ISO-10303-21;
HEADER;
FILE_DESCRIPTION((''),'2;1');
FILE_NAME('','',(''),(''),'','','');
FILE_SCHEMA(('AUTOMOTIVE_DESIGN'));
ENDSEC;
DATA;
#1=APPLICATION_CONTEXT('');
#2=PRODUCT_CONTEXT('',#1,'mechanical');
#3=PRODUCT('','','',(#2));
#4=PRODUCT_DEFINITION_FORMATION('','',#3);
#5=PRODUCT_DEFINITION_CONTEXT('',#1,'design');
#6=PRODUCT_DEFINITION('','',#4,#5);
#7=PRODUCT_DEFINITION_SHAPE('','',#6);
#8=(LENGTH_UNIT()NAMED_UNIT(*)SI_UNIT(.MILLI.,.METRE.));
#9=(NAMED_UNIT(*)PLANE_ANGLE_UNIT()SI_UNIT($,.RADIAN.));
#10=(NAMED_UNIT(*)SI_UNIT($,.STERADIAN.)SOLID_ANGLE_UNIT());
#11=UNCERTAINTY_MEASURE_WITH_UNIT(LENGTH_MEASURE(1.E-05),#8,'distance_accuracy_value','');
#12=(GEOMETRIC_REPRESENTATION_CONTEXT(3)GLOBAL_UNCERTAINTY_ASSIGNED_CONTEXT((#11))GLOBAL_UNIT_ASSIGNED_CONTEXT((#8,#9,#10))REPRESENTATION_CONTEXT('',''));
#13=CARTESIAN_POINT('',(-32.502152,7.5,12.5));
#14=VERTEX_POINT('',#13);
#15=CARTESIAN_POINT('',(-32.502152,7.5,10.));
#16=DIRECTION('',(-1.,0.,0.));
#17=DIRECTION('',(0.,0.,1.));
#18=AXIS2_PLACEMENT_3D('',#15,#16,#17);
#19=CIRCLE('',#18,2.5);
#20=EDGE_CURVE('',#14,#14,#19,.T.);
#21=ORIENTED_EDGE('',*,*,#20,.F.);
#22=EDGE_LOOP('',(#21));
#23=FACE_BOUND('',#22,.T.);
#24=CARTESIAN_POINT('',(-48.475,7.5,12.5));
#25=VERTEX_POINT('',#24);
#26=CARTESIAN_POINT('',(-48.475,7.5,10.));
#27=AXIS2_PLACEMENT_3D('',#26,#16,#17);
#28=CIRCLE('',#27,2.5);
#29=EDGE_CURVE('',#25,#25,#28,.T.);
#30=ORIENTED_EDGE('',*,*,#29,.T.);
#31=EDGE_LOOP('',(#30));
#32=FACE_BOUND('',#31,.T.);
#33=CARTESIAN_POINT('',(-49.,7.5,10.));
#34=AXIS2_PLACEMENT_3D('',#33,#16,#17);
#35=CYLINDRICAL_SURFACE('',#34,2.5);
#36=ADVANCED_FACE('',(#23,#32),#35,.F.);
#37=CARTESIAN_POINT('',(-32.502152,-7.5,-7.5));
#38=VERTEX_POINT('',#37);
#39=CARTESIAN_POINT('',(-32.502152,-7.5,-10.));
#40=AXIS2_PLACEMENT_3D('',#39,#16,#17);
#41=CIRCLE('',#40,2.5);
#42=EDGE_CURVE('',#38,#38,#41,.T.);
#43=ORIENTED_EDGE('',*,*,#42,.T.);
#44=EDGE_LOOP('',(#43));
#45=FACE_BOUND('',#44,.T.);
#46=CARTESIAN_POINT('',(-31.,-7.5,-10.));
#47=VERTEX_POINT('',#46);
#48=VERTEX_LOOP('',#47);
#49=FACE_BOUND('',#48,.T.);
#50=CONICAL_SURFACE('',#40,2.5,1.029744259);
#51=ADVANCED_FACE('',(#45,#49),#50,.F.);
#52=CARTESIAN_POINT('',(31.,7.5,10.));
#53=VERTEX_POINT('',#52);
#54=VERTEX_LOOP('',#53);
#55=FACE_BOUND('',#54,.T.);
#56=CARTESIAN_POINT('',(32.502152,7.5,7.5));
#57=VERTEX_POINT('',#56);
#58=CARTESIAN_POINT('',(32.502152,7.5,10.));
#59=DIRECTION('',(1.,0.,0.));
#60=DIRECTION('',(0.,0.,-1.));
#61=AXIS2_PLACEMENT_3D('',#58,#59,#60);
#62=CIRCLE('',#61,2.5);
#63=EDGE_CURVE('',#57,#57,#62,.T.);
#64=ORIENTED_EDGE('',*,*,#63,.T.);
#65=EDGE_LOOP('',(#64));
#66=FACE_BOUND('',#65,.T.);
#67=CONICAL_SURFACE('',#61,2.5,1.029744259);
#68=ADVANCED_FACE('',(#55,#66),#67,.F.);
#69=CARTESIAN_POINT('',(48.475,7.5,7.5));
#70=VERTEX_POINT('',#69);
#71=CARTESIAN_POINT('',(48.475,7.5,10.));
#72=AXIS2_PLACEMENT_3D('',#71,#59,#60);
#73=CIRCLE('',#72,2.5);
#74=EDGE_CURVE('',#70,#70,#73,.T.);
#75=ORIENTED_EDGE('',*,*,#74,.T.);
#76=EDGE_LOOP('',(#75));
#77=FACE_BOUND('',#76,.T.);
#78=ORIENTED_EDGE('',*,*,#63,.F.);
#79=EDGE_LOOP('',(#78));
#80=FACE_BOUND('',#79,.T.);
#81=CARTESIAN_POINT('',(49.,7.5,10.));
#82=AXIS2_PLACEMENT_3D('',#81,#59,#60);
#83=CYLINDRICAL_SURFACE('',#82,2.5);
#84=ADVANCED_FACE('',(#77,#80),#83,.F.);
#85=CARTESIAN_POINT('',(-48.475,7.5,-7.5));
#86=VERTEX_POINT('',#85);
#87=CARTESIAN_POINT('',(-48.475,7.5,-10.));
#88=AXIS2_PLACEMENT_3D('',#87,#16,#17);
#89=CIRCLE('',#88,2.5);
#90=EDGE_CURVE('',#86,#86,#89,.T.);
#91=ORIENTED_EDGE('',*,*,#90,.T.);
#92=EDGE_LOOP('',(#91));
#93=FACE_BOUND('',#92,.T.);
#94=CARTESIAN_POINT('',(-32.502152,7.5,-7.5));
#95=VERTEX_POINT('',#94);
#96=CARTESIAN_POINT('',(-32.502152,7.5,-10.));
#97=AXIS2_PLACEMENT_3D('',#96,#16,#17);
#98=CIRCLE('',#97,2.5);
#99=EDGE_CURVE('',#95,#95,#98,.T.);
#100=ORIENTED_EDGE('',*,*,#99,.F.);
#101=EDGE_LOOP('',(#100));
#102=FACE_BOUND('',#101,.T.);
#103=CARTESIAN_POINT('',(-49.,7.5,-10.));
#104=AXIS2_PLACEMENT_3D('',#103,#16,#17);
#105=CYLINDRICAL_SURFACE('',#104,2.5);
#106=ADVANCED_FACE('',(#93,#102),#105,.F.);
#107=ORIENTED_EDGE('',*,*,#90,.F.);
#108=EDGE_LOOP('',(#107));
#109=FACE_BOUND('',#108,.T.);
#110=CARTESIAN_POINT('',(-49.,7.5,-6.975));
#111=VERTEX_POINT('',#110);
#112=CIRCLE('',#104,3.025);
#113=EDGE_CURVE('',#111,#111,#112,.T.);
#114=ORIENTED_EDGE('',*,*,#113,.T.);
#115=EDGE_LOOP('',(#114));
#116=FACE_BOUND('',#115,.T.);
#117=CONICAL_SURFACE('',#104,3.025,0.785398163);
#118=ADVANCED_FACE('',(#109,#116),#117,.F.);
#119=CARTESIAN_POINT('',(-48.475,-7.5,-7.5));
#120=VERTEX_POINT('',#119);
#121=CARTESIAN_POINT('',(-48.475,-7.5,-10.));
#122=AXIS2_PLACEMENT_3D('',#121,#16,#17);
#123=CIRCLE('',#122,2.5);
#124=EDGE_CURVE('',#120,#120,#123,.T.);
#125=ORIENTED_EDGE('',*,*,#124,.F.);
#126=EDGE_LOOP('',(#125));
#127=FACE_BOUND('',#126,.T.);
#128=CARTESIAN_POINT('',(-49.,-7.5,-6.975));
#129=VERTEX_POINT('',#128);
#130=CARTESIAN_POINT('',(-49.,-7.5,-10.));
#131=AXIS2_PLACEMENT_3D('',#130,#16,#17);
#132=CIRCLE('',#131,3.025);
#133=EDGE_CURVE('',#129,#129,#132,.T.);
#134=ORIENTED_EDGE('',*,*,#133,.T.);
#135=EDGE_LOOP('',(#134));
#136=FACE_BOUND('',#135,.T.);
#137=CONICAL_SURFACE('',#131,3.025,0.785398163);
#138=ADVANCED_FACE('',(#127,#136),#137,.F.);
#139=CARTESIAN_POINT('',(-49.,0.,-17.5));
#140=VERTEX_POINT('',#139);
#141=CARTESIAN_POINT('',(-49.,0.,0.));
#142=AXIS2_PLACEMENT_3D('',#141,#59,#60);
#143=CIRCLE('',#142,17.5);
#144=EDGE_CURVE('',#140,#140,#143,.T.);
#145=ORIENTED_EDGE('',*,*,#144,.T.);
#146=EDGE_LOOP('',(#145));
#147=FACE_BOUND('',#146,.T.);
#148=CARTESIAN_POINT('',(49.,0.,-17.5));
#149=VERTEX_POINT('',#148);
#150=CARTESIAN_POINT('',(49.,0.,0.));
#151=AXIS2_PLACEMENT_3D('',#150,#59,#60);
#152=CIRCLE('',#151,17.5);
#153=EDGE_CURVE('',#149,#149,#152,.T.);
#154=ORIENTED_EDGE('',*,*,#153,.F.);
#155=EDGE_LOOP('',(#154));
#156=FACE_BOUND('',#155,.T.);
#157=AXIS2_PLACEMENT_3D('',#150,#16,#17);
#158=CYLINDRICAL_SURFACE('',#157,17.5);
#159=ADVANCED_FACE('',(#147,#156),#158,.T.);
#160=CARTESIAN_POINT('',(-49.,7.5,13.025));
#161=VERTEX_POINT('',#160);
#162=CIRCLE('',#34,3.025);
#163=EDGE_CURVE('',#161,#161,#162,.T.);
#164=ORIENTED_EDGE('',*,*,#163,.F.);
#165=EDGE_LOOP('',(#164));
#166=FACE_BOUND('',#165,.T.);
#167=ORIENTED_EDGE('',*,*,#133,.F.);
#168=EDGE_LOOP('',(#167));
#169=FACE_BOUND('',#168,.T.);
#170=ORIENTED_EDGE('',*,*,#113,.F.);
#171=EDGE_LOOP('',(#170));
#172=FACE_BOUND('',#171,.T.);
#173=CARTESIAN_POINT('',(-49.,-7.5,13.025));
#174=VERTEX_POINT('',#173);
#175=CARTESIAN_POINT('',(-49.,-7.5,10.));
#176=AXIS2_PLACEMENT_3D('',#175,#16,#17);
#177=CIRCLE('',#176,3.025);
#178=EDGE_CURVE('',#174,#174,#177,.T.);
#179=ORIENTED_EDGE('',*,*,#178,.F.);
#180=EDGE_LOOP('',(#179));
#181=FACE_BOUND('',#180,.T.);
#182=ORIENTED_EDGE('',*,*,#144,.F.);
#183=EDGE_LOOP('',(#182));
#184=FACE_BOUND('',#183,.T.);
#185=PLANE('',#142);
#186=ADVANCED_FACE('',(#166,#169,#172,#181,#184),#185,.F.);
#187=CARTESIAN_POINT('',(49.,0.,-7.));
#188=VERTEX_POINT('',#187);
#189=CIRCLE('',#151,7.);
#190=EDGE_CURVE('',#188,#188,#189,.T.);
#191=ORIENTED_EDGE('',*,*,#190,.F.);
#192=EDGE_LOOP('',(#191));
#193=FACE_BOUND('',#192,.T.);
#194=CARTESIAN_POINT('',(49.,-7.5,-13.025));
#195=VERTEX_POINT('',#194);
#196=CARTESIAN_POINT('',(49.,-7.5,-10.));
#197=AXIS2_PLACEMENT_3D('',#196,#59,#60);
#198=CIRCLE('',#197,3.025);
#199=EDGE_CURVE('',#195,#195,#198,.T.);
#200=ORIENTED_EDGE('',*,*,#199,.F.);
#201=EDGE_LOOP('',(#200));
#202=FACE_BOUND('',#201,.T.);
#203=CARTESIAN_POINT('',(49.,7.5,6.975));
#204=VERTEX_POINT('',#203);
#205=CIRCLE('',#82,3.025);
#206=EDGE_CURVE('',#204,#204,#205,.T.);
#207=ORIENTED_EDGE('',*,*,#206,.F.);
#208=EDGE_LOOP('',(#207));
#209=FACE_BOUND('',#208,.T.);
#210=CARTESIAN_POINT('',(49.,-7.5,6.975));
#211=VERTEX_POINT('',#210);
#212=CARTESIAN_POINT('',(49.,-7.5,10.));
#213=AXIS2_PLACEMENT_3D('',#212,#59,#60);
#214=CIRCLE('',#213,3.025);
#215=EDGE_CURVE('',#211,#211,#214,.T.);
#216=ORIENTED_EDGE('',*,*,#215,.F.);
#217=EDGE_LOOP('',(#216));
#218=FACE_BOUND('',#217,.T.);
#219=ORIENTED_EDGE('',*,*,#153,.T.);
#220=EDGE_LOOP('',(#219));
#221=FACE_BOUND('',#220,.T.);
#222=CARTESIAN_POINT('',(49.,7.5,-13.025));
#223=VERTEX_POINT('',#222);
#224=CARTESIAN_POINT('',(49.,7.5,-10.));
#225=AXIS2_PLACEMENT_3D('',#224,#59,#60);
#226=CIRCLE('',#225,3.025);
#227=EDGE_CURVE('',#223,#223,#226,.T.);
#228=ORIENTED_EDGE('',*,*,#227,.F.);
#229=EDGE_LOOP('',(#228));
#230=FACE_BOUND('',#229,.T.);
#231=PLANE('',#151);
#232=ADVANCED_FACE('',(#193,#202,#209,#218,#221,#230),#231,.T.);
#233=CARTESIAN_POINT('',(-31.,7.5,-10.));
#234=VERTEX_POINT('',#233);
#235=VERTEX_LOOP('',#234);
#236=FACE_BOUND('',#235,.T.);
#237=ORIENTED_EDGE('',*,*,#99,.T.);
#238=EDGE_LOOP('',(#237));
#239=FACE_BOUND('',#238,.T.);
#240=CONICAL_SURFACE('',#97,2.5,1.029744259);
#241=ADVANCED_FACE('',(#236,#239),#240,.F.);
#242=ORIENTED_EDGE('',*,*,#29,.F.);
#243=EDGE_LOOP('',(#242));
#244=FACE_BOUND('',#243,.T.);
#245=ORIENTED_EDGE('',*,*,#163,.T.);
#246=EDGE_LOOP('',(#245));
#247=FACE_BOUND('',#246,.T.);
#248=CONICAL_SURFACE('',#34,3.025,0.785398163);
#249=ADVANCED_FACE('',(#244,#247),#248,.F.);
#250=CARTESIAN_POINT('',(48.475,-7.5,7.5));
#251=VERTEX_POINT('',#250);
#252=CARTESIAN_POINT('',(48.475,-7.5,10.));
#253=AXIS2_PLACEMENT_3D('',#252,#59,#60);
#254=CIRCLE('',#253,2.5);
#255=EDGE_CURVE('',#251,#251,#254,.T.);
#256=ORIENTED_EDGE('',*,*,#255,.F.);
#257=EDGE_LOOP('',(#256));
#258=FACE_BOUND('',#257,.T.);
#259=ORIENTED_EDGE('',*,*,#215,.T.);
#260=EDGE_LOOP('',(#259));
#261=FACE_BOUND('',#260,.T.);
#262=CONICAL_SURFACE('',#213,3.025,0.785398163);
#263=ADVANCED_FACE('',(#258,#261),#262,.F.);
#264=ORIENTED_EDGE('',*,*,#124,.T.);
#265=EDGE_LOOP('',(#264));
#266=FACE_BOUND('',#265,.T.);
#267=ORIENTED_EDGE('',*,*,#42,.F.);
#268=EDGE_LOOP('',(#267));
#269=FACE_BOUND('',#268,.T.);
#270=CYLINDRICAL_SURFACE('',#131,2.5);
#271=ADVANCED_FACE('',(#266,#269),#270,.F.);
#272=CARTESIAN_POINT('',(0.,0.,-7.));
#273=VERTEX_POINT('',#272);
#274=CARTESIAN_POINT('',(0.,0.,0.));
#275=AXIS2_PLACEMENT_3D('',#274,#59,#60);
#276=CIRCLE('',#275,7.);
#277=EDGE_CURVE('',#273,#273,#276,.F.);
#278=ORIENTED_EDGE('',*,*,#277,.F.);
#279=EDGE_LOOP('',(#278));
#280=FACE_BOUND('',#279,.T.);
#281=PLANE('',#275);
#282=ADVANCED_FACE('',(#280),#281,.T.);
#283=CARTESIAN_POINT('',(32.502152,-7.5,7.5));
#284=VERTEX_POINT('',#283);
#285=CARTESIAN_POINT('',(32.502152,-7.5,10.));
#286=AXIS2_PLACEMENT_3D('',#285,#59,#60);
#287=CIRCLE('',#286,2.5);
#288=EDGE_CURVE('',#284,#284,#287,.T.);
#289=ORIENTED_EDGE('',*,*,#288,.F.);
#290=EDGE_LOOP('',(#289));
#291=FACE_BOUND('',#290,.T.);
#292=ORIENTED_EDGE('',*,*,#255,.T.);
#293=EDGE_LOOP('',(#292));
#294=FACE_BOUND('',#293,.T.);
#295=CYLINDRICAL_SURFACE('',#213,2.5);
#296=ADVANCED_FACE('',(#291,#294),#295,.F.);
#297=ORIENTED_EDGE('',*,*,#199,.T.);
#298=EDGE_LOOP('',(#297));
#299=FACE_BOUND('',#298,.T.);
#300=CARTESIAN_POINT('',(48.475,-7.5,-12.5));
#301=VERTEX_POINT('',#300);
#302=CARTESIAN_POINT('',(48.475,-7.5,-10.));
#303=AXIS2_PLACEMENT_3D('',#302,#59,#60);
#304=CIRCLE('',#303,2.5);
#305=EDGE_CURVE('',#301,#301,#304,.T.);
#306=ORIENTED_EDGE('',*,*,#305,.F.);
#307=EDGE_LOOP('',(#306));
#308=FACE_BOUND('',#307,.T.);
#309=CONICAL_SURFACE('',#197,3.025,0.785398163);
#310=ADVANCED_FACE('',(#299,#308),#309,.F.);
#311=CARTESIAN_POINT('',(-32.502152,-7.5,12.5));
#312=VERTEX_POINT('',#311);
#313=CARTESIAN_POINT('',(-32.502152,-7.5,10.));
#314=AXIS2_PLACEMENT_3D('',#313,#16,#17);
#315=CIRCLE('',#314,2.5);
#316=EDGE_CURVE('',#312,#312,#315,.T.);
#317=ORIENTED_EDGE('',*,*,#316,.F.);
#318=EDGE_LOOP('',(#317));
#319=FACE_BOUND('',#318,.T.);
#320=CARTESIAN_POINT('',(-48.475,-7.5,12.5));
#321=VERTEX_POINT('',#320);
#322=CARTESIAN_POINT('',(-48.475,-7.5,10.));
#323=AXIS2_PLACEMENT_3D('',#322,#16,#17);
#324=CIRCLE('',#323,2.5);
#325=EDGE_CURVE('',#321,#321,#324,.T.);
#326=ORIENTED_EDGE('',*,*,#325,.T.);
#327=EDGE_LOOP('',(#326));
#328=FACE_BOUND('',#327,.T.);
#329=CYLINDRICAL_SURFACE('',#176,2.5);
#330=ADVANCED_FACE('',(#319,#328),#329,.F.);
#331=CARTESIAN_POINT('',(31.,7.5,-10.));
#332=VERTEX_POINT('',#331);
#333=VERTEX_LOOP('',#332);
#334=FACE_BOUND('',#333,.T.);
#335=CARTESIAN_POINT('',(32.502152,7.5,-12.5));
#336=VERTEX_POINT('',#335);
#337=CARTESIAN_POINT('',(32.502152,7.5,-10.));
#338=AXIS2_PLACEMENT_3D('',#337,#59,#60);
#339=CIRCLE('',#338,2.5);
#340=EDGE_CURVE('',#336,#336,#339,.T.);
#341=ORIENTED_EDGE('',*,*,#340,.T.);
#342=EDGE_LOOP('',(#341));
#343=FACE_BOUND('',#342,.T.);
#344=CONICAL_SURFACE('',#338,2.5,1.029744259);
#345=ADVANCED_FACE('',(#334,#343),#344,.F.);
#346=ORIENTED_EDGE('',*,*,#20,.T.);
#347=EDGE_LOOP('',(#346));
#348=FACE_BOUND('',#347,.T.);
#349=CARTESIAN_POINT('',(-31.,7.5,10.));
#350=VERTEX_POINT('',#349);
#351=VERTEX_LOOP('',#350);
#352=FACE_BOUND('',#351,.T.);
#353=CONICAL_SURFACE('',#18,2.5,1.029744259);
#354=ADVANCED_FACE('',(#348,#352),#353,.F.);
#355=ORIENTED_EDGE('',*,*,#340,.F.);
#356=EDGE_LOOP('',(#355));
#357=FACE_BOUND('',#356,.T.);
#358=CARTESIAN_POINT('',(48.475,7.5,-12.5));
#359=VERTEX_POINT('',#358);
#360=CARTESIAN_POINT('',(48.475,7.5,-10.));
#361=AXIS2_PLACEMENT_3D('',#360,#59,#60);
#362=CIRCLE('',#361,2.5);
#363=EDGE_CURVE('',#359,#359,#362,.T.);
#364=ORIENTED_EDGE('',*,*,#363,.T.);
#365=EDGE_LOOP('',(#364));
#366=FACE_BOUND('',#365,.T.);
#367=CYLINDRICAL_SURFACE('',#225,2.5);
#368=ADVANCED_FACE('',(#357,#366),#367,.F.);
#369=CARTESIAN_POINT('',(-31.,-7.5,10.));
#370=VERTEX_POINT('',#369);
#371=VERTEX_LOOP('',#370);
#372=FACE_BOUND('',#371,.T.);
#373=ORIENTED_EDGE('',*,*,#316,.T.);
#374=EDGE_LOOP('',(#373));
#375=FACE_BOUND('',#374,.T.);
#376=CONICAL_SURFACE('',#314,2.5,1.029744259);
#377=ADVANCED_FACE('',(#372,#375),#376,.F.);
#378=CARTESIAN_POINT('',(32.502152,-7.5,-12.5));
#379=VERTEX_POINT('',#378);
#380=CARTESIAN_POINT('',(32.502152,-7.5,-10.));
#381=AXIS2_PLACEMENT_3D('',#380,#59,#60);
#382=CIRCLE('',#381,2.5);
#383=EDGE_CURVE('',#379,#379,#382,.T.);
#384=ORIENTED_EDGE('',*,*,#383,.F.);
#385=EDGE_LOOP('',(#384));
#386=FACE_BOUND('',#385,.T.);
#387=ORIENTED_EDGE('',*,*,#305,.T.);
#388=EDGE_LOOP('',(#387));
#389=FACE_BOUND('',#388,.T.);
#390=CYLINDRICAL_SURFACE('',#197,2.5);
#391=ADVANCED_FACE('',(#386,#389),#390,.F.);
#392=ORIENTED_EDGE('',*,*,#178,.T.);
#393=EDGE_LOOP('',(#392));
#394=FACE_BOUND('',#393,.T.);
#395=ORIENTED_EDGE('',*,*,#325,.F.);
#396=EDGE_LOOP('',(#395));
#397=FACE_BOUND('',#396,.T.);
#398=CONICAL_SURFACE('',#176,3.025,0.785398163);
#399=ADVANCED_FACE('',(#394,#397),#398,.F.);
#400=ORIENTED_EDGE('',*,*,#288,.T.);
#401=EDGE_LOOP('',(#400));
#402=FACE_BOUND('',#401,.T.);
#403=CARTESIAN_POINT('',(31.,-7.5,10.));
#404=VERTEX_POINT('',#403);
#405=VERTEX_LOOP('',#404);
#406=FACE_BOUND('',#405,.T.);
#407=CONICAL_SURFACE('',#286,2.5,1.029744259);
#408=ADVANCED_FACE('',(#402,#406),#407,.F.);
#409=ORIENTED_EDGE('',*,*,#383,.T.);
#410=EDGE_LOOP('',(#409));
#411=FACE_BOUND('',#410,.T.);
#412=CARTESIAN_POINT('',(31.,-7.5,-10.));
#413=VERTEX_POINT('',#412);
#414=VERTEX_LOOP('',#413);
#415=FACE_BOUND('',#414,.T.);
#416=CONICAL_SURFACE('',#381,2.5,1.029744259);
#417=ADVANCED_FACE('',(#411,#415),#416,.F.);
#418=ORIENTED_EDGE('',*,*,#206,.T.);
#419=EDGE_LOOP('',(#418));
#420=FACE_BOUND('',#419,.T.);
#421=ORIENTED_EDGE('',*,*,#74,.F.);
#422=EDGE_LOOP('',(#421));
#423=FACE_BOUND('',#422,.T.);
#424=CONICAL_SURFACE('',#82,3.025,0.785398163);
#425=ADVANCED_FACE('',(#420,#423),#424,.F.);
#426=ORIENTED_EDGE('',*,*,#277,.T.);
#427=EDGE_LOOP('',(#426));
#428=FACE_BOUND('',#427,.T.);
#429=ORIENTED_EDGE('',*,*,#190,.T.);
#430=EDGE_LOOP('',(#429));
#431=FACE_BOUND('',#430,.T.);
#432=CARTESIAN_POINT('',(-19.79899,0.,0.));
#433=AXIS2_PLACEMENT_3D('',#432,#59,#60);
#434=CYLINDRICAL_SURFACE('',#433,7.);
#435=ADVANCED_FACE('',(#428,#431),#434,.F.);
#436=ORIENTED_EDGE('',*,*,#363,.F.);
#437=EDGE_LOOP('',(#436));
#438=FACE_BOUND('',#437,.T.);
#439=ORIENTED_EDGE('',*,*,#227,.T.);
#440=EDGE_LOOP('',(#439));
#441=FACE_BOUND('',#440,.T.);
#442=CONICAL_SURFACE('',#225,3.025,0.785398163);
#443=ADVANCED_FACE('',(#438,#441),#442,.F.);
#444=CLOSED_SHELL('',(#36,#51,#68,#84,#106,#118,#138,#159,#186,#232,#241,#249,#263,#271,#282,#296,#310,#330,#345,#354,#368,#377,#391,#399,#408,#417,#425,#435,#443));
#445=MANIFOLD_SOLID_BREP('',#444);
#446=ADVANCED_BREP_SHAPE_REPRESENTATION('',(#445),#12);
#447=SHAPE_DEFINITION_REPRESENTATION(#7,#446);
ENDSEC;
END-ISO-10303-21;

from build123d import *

# Parameters (mm, degrees)
SKETCH2_R           = 17.5
BOSS_EXTRUDE1_DEPTH = 49
CUT_EXTRUDE1_START  = -49
SKETCH3_R           = 7
CUT_EXTRUDE1_DEPTH  = 49


# Read off the part's stored shape, not the designer's step: M6 Tapped Hole1
with BuildPart() as part:
    # Sketch2 → Boss-Extrude1 (new, symmetric)
    with BuildSketch(Plane(origin=(0, 0, 0), x_dir=(0, 0, -1), z_dir=(1, 0, 0))):
        Circle(SKETCH2_R)
    extrude(amount=BOSS_EXTRUDE1_DEPTH, both=True)

    # Sketch3 → Cut-Extrude1 (cut)
    with BuildSketch(Plane(origin=(49, 0, 0), x_dir=(0, 0, -1), z_dir=(1, 0, 0)).offset(CUT_EXTRUDE1_START)):
        Circle(SKETCH3_R)
    extrude(amount=CUT_EXTRUDE1_DEPTH, mode=Mode.SUBTRACT)

    # M6 Tapped Hole1 outline → M6 Tapped Hole1 (revolve, cut)
    with BuildSketch(Plane(origin=(0, -7.5, -10), x_dir=(0, 1, 0), z_dir=(0, 0, -1))):
        Polygon((0, 49), (0, 31), (2.5, 32.502151548), (2.5, 48.475), (3.025, 49), align=None)
    m6_tapped_hole1 = revolve(axis=Axis((0, -7.5, -10), (1, 0, 0)), mode=Mode.SUBTRACT)

    # M6 Tapped Hole1 2 outline → M6 Tapped Hole1 2 (revolve, cut)
    with BuildSketch(Plane(origin=(0, 7.5, 10), x_dir=(0, 1, 0), z_dir=(0, 0, -1))):
        Polygon((0, 49), (0, 31), (2.5, 32.502151548), (2.5, 48.475), (3.025, 49), align=None)
    m6_tapped_hole1_2 = revolve(axis=Axis((0, 7.5, 10), (1, 0, 0)), mode=Mode.SUBTRACT)

    # M6 Tapped Hole1 3 outline → M6 Tapped Hole1 3 (revolve, cut)
    with BuildSketch(Plane(origin=(0, -7.5, 10), x_dir=(0, 1, 0), z_dir=(0, 0, -1))):
        Polygon((0, 49), (0, 31), (2.5, 32.502151548), (2.5, 48.475), (3.025, 49), align=None)
    m6_tapped_hole1_3 = revolve(axis=Axis((0, -7.5, 10), (1, 0, 0)), mode=Mode.SUBTRACT)

    # M6 Tapped Hole1 4 outline → M6 Tapped Hole1 4 (revolve, cut)
    with BuildSketch(Plane(origin=(0, 7.5, -10), x_dir=(0, 1, 0), z_dir=(0, 0, -1))):
        Polygon((0, 49), (0, 31), (2.5, 32.502151548), (2.5, 48.475), (3.025, 49), align=None)
    m6_tapped_hole1_4 = revolve(axis=Axis((0, 7.5, -10), (1, 0, 0)), mode=Mode.SUBTRACT)

    # Mirror1: M6 Tapped Hole1, M6 Tapped Hole1 2, M6 Tapped Hole1 3, M6 Tapped Hole1 4 across plane
    add(m6_tapped_hole1.mirror(Plane(origin=(0, 0, 0), x_dir=(0, 0, 1), z_dir=(1, 0, 0))), mode=Mode.SUBTRACT)
    add(m6_tapped_hole1_2.mirror(Plane(origin=(0, 0, 0), x_dir=(0, 0, 1), z_dir=(1, 0, 0))), mode=Mode.SUBTRACT)
    add(m6_tapped_hole1_3.mirror(Plane(origin=(0, 0, 0), x_dir=(0, 0, 1), z_dir=(1, 0, 0))), mode=Mode.SUBTRACT)
    add(m6_tapped_hole1_4.mirror(Plane(origin=(0, 0, 0), x_dir=(0, 0, 1), z_dir=(1, 0, 0))), mode=Mode.SUBTRACT)


solid = part.part
